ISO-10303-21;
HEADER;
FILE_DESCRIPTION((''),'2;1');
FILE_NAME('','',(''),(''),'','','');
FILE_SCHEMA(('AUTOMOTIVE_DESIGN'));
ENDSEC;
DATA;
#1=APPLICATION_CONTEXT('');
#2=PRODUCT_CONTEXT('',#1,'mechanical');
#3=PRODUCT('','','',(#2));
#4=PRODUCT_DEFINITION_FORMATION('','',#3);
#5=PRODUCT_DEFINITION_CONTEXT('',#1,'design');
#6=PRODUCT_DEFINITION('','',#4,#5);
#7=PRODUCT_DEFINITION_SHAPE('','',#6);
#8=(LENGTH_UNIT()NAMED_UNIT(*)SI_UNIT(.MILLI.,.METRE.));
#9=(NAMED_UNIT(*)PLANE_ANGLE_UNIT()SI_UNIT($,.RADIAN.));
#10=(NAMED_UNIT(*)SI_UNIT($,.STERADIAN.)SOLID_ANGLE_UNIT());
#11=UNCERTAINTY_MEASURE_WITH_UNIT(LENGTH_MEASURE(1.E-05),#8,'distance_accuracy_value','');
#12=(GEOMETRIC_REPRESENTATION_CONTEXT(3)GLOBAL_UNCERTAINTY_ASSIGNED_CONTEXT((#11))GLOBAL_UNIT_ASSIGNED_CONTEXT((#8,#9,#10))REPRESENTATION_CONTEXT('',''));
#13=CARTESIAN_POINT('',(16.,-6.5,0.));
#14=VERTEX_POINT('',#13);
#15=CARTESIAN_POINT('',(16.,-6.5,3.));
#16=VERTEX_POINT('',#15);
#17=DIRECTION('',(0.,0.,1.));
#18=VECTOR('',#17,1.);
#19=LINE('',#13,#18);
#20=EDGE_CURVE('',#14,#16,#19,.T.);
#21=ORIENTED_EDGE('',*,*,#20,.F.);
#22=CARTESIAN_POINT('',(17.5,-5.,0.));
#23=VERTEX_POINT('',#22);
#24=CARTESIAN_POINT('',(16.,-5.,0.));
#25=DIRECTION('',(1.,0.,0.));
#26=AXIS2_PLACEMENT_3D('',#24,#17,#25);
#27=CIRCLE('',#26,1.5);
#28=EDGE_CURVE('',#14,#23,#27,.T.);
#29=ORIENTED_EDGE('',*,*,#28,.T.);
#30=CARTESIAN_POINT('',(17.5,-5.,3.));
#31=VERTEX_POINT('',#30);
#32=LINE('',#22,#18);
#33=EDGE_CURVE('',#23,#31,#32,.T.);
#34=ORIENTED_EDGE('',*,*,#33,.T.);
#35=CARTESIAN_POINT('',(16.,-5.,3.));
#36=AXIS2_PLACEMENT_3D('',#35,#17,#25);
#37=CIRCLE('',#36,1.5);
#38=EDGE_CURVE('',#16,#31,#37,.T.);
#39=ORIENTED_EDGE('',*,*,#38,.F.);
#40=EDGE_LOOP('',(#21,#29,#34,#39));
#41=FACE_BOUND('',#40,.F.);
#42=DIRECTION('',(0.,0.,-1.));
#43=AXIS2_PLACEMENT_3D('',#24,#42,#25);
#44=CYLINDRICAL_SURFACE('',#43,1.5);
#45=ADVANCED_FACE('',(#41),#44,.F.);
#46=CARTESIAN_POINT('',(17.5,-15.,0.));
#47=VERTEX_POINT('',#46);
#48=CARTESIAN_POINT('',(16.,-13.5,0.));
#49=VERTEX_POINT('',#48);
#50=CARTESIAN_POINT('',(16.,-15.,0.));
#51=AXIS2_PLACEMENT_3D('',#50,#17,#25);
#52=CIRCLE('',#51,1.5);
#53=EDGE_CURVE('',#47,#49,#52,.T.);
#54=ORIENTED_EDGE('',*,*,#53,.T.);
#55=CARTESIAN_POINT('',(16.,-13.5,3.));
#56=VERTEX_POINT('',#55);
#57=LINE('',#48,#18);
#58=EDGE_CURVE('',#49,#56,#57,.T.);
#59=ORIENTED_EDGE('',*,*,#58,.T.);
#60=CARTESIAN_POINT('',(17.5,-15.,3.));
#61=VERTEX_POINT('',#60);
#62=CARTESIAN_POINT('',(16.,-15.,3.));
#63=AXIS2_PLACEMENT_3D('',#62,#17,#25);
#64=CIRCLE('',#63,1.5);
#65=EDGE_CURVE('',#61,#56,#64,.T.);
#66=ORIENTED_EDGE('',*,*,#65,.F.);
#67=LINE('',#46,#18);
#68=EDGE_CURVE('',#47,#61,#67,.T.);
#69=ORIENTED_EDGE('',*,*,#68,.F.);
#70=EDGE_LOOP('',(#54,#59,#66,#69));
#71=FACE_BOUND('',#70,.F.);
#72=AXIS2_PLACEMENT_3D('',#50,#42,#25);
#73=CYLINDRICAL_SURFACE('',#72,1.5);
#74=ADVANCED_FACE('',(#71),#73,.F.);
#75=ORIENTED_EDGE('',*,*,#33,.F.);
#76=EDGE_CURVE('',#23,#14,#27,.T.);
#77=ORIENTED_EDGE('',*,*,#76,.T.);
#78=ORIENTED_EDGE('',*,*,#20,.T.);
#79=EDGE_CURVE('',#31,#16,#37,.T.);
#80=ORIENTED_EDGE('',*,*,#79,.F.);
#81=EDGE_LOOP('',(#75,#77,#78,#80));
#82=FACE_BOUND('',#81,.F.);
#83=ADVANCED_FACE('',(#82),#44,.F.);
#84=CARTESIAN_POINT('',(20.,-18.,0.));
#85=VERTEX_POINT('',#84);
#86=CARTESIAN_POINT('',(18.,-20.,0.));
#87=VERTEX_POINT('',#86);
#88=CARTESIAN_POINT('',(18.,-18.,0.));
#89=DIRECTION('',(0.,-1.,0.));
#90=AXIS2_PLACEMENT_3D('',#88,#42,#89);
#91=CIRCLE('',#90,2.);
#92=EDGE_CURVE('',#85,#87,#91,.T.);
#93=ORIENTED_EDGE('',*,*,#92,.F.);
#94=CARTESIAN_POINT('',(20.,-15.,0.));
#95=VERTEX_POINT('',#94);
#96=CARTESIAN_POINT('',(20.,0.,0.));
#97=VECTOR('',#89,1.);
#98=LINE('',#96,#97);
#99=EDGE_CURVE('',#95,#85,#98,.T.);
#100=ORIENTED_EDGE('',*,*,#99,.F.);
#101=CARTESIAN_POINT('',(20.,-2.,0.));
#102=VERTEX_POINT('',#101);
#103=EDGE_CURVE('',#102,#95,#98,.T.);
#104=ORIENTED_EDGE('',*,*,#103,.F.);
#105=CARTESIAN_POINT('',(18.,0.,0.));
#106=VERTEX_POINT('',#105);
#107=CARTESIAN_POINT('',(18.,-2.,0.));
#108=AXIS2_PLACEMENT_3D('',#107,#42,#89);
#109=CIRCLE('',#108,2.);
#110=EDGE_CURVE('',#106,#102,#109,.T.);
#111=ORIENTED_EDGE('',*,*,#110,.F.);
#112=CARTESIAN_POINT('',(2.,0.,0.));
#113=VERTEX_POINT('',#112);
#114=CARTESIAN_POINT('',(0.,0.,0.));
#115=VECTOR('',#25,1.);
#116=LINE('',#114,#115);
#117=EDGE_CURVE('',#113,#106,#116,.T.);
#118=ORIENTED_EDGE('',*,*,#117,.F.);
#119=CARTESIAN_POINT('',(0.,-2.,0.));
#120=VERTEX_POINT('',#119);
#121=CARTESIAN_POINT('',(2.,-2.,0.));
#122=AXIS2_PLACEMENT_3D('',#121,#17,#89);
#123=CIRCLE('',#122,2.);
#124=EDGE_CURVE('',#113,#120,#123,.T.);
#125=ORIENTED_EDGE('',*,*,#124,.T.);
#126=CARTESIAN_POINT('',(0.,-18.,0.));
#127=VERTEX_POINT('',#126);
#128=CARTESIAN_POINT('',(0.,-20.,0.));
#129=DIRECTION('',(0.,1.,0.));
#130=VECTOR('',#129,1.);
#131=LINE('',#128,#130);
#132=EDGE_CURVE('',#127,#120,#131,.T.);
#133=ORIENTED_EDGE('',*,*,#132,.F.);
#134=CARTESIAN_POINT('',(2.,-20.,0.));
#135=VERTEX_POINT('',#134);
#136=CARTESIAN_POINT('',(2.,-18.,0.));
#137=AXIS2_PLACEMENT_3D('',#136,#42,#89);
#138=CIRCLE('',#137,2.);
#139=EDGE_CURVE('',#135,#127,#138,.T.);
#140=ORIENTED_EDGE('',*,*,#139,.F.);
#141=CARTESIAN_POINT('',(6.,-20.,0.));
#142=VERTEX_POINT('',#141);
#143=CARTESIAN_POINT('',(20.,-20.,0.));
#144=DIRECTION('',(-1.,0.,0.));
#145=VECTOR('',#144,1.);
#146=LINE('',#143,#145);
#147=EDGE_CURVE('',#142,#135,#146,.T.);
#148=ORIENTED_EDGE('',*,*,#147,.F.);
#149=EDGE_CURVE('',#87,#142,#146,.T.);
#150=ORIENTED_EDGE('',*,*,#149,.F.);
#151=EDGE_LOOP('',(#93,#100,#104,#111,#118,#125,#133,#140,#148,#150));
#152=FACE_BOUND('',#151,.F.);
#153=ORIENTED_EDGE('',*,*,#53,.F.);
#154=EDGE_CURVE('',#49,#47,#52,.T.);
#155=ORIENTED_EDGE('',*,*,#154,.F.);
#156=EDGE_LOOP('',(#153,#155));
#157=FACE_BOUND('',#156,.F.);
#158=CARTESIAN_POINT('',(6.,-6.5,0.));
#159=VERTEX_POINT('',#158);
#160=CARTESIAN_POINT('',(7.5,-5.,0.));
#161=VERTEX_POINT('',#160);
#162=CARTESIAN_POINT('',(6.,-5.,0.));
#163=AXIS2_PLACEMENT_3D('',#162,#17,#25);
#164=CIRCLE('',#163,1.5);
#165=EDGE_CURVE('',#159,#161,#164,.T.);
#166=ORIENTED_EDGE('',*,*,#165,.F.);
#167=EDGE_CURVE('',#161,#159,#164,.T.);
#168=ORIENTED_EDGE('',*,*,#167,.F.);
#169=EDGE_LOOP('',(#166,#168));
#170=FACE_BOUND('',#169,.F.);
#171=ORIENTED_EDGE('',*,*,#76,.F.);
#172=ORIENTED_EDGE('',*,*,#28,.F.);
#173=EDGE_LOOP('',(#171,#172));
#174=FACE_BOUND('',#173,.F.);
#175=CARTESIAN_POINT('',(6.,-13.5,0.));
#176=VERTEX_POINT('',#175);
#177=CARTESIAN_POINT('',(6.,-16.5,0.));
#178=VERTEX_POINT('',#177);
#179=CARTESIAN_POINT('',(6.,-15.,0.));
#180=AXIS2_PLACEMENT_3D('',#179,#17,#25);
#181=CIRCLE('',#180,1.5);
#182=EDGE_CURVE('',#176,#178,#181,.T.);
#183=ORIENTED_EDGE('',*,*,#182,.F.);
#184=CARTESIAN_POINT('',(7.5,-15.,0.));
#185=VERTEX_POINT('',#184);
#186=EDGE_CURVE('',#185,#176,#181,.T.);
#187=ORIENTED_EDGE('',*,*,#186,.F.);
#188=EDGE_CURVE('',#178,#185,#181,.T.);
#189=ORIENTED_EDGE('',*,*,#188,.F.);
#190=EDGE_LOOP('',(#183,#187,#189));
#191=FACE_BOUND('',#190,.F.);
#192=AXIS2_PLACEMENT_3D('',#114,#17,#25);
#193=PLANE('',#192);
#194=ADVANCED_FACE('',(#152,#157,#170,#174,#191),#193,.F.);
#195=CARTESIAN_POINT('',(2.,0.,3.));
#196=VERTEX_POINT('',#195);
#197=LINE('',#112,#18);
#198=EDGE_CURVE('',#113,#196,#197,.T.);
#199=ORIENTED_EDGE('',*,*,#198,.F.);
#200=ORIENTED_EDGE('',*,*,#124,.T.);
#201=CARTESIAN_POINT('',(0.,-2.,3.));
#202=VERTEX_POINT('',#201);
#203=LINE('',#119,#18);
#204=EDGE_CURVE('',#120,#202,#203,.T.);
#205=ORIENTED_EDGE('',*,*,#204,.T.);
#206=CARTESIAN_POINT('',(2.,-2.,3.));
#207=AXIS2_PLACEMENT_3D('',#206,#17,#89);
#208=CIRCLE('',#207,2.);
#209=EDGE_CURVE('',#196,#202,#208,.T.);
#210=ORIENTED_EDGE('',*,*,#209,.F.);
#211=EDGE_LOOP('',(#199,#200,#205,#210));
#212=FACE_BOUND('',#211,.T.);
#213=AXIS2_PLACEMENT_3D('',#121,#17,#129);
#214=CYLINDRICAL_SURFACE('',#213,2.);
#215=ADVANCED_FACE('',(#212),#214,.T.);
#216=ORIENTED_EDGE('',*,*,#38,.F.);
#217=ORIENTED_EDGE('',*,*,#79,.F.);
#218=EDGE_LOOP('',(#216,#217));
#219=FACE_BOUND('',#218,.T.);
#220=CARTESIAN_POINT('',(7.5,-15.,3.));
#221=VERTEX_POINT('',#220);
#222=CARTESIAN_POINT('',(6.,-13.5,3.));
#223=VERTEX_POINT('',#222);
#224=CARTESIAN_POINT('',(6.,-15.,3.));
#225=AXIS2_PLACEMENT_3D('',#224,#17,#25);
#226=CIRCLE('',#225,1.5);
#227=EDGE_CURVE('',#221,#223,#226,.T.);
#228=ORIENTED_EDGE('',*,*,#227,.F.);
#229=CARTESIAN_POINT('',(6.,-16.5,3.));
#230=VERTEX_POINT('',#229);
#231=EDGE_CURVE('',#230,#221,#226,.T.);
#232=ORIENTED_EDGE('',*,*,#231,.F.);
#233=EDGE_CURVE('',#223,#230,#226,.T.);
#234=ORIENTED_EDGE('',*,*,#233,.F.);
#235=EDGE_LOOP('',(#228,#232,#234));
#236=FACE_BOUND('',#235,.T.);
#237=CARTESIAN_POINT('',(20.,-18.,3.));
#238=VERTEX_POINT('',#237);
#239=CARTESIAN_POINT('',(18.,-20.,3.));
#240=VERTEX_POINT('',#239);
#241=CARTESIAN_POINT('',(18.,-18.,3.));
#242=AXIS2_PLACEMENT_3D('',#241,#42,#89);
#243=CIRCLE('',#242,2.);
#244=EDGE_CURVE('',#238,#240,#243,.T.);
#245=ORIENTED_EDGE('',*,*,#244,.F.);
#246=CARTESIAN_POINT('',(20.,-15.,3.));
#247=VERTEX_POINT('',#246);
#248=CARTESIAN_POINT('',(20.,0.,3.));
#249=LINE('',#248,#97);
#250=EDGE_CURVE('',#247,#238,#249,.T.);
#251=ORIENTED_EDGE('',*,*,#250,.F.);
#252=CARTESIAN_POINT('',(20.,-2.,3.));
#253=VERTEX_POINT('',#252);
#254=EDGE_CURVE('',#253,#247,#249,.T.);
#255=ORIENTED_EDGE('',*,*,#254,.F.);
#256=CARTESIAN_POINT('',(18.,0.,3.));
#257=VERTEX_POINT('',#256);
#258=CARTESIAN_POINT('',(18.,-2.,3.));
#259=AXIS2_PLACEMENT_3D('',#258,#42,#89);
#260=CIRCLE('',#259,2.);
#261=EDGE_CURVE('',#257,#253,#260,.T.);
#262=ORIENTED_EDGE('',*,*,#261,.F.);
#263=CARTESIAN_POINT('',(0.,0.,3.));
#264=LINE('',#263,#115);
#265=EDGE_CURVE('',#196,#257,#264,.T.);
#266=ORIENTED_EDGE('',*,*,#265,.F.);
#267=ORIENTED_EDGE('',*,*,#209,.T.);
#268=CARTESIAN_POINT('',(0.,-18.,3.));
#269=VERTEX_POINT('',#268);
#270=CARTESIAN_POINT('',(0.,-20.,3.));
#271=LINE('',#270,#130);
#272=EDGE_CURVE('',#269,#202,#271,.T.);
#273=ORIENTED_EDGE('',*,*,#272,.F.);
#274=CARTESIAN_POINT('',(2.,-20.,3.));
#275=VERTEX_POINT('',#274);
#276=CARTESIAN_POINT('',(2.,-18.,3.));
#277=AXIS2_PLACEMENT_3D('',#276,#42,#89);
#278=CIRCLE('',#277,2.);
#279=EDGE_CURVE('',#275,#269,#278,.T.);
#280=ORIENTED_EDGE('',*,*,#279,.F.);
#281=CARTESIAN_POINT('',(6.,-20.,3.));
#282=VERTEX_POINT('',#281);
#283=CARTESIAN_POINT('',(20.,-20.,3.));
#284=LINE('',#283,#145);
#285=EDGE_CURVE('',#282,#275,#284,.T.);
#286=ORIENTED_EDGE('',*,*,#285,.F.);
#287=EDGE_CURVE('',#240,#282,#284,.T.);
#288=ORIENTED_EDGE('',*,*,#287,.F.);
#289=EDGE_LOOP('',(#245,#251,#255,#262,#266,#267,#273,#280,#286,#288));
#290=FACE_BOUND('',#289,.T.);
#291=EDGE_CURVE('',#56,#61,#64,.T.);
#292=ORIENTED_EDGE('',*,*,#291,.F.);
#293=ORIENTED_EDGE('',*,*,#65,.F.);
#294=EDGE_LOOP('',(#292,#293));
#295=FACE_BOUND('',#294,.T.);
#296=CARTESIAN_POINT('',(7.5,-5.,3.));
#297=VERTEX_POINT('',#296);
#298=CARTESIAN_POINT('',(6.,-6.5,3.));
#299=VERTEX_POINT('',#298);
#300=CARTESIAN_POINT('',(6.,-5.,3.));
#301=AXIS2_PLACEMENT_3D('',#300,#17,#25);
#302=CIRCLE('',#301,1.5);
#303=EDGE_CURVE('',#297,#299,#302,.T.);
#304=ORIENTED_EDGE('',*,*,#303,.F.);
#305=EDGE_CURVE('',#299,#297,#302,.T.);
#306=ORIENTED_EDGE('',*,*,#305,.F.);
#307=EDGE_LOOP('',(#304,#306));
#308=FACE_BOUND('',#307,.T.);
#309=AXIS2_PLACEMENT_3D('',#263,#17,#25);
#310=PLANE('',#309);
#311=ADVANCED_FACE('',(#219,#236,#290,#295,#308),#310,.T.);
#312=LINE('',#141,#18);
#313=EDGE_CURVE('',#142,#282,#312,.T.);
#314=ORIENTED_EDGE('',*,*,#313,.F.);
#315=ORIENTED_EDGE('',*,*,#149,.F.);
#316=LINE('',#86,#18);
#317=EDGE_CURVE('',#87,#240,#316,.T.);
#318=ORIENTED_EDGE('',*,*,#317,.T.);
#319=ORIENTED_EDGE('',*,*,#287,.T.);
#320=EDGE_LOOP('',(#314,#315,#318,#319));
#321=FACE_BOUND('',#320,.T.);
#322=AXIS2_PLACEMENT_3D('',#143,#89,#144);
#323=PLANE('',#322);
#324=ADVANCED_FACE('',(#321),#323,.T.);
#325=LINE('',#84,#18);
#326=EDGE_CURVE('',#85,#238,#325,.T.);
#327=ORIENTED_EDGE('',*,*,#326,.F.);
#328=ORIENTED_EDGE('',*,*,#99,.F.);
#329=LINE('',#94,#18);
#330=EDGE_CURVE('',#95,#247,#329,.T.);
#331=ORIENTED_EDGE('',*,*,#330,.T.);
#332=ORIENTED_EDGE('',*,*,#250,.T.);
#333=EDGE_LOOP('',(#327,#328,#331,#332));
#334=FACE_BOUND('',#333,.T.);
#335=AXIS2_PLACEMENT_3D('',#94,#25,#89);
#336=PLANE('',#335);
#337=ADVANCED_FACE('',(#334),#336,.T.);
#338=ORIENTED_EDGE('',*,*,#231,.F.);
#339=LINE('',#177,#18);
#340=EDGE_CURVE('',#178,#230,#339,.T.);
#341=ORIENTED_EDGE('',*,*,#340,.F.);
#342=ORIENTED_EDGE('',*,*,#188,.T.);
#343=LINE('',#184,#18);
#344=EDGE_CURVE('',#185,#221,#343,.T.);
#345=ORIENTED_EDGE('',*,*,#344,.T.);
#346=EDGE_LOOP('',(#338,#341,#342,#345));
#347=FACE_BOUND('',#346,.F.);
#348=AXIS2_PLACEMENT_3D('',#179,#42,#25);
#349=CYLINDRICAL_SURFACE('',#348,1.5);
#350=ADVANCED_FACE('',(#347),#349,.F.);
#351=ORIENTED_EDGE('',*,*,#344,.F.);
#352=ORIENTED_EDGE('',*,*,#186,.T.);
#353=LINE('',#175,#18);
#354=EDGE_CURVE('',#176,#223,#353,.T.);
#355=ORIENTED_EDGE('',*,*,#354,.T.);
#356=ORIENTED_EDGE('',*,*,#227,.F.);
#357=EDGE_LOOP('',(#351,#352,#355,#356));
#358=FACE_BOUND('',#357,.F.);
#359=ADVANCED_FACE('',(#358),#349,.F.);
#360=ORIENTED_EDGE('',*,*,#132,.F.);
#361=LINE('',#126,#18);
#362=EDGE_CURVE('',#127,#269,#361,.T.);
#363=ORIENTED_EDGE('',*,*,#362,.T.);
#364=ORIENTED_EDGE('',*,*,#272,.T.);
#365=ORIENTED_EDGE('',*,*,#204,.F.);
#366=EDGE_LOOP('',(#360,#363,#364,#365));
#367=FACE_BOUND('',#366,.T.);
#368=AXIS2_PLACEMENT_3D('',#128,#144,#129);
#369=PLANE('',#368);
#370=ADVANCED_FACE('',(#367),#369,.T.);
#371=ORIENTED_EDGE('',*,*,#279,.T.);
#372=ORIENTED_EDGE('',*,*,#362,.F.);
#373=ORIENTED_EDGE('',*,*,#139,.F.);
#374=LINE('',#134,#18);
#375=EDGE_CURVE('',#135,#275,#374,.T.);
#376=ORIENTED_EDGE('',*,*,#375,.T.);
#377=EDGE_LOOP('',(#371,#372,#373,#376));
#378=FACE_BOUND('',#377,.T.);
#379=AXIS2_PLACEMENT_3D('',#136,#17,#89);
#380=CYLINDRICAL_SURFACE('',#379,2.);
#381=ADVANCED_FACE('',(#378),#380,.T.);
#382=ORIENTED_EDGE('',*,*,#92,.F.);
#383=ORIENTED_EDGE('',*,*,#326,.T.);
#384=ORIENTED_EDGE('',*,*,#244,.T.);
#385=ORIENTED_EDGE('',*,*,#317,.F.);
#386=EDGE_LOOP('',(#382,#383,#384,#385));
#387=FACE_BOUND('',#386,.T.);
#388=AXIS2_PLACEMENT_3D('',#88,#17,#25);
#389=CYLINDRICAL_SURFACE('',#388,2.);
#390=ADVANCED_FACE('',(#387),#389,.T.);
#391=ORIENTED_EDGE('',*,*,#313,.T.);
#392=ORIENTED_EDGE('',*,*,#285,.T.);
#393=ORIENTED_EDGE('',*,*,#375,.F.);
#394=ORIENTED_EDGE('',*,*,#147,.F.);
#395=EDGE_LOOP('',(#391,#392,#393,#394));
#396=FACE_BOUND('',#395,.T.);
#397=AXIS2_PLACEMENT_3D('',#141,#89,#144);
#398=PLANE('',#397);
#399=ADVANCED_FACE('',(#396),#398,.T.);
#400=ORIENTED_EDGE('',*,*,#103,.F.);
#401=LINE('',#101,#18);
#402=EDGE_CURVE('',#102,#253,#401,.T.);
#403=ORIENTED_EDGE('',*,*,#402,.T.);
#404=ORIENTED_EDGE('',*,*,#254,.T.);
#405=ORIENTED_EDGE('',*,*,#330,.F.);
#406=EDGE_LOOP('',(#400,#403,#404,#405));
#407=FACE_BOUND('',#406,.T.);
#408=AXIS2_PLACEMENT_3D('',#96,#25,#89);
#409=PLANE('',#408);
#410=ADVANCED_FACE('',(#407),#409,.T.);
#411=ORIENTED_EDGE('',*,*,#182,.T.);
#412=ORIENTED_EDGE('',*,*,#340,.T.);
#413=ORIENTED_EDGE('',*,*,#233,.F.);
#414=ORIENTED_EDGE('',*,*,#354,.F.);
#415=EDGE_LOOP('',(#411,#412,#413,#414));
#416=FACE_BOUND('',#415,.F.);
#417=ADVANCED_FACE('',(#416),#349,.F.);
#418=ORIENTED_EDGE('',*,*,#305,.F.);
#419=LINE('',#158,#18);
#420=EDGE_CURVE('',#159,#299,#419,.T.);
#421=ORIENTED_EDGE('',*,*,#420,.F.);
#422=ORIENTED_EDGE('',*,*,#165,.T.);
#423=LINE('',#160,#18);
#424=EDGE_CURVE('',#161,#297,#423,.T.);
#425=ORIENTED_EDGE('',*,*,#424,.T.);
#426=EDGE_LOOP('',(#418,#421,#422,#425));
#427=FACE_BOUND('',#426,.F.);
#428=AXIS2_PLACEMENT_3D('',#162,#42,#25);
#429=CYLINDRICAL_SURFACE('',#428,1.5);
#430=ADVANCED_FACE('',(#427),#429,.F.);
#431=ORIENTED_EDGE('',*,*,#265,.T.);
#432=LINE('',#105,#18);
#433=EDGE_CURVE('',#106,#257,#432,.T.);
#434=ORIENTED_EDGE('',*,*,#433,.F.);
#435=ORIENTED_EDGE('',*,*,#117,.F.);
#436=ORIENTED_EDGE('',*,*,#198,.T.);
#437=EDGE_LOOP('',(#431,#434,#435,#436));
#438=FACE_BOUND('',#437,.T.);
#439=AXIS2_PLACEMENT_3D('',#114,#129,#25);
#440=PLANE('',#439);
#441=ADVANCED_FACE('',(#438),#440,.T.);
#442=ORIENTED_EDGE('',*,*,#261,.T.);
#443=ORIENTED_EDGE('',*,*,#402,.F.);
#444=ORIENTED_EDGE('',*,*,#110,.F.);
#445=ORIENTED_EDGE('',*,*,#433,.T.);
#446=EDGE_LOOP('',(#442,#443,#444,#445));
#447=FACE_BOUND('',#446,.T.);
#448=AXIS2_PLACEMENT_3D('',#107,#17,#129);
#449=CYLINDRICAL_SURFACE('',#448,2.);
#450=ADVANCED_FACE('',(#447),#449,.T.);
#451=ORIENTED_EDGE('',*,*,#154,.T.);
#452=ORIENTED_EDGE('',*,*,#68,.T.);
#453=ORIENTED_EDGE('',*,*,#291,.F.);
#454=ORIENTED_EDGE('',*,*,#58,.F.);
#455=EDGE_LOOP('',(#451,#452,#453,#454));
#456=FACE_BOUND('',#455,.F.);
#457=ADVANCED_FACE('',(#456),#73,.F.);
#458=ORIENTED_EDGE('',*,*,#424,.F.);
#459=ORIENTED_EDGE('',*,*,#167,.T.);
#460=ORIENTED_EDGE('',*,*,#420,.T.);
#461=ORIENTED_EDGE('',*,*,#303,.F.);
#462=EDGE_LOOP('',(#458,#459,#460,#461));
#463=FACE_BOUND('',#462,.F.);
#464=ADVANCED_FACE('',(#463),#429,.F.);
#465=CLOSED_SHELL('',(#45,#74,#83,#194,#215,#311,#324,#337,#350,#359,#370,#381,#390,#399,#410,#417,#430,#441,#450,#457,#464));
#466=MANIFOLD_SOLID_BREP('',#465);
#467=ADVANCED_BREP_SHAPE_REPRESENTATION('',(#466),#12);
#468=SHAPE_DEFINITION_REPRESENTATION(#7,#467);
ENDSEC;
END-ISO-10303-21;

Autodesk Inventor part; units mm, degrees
ref_plane "YZ Plane" through (0, 0, 0) normal (1, 0, 0) x (0, 1, 0)
ref_plane "XZ Plane" through (0, 0, 0) normal (0, 1, 0) x (-1, 0, 0)
ref_plane "XY Plane" through (0, 0, 0) normal (0, 0, 1) x (1, 0, 0)
ref_plane "Plano de trabajo5" through (0, 0, 0) normal (0, 0, 1) x (1, 0, 0)
sketch "Boceto2" plane through (0, 0, 0) normal (0, 0, 1) x (1, 0, 0)
  line L0 (0, 0) -> (20, 0)
  line L1 (20, 0) -> (20, -20)
  line L2 (20, -20) -> (0, -20)
  line L3 (0, -20) -> (0, 0)
  line L4 (0, -20) -> (6, -20)
  line L5 (6, -20) -> (6, -15)
  line L6 (6, -15) -> (6, -5)
  circle A0 centre (6, -15) radius 1.5
  circle A1 centre (6, -5) radius 1.5
  line L7 (20, -20) -> (20, -15)
  line L8 (20, -15) -> (16, -15)
  line L9 (16, -15) -> (16, -5)
  circle A2 centre (16, -15) radius 1.5
  circle A3 centre (16, -5) radius 1.5
  dimension "d17" = 20
  dimension "d18" = 20
  dimension "d19" = 6
  dimension "d20" = 5
  dimension "d21" = 10
  dimension "d22" = 3
  dimension "d23" = 3
  dimension "d24" = 5
  dimension "d25" = 4
  dimension "d26" = 10
  dimension "d27" = 3
  dimension "d28" = 3
extrude "Extrusión2" add sketch "Boceto2" along normal blind 3
fillet "Empalme2" radius 2 4 edges at (0, -20, 1.5) (0, 0, 1.5) (20, 0, 1.5) (20, -20, 1.5)
properties part number "Union 4"
